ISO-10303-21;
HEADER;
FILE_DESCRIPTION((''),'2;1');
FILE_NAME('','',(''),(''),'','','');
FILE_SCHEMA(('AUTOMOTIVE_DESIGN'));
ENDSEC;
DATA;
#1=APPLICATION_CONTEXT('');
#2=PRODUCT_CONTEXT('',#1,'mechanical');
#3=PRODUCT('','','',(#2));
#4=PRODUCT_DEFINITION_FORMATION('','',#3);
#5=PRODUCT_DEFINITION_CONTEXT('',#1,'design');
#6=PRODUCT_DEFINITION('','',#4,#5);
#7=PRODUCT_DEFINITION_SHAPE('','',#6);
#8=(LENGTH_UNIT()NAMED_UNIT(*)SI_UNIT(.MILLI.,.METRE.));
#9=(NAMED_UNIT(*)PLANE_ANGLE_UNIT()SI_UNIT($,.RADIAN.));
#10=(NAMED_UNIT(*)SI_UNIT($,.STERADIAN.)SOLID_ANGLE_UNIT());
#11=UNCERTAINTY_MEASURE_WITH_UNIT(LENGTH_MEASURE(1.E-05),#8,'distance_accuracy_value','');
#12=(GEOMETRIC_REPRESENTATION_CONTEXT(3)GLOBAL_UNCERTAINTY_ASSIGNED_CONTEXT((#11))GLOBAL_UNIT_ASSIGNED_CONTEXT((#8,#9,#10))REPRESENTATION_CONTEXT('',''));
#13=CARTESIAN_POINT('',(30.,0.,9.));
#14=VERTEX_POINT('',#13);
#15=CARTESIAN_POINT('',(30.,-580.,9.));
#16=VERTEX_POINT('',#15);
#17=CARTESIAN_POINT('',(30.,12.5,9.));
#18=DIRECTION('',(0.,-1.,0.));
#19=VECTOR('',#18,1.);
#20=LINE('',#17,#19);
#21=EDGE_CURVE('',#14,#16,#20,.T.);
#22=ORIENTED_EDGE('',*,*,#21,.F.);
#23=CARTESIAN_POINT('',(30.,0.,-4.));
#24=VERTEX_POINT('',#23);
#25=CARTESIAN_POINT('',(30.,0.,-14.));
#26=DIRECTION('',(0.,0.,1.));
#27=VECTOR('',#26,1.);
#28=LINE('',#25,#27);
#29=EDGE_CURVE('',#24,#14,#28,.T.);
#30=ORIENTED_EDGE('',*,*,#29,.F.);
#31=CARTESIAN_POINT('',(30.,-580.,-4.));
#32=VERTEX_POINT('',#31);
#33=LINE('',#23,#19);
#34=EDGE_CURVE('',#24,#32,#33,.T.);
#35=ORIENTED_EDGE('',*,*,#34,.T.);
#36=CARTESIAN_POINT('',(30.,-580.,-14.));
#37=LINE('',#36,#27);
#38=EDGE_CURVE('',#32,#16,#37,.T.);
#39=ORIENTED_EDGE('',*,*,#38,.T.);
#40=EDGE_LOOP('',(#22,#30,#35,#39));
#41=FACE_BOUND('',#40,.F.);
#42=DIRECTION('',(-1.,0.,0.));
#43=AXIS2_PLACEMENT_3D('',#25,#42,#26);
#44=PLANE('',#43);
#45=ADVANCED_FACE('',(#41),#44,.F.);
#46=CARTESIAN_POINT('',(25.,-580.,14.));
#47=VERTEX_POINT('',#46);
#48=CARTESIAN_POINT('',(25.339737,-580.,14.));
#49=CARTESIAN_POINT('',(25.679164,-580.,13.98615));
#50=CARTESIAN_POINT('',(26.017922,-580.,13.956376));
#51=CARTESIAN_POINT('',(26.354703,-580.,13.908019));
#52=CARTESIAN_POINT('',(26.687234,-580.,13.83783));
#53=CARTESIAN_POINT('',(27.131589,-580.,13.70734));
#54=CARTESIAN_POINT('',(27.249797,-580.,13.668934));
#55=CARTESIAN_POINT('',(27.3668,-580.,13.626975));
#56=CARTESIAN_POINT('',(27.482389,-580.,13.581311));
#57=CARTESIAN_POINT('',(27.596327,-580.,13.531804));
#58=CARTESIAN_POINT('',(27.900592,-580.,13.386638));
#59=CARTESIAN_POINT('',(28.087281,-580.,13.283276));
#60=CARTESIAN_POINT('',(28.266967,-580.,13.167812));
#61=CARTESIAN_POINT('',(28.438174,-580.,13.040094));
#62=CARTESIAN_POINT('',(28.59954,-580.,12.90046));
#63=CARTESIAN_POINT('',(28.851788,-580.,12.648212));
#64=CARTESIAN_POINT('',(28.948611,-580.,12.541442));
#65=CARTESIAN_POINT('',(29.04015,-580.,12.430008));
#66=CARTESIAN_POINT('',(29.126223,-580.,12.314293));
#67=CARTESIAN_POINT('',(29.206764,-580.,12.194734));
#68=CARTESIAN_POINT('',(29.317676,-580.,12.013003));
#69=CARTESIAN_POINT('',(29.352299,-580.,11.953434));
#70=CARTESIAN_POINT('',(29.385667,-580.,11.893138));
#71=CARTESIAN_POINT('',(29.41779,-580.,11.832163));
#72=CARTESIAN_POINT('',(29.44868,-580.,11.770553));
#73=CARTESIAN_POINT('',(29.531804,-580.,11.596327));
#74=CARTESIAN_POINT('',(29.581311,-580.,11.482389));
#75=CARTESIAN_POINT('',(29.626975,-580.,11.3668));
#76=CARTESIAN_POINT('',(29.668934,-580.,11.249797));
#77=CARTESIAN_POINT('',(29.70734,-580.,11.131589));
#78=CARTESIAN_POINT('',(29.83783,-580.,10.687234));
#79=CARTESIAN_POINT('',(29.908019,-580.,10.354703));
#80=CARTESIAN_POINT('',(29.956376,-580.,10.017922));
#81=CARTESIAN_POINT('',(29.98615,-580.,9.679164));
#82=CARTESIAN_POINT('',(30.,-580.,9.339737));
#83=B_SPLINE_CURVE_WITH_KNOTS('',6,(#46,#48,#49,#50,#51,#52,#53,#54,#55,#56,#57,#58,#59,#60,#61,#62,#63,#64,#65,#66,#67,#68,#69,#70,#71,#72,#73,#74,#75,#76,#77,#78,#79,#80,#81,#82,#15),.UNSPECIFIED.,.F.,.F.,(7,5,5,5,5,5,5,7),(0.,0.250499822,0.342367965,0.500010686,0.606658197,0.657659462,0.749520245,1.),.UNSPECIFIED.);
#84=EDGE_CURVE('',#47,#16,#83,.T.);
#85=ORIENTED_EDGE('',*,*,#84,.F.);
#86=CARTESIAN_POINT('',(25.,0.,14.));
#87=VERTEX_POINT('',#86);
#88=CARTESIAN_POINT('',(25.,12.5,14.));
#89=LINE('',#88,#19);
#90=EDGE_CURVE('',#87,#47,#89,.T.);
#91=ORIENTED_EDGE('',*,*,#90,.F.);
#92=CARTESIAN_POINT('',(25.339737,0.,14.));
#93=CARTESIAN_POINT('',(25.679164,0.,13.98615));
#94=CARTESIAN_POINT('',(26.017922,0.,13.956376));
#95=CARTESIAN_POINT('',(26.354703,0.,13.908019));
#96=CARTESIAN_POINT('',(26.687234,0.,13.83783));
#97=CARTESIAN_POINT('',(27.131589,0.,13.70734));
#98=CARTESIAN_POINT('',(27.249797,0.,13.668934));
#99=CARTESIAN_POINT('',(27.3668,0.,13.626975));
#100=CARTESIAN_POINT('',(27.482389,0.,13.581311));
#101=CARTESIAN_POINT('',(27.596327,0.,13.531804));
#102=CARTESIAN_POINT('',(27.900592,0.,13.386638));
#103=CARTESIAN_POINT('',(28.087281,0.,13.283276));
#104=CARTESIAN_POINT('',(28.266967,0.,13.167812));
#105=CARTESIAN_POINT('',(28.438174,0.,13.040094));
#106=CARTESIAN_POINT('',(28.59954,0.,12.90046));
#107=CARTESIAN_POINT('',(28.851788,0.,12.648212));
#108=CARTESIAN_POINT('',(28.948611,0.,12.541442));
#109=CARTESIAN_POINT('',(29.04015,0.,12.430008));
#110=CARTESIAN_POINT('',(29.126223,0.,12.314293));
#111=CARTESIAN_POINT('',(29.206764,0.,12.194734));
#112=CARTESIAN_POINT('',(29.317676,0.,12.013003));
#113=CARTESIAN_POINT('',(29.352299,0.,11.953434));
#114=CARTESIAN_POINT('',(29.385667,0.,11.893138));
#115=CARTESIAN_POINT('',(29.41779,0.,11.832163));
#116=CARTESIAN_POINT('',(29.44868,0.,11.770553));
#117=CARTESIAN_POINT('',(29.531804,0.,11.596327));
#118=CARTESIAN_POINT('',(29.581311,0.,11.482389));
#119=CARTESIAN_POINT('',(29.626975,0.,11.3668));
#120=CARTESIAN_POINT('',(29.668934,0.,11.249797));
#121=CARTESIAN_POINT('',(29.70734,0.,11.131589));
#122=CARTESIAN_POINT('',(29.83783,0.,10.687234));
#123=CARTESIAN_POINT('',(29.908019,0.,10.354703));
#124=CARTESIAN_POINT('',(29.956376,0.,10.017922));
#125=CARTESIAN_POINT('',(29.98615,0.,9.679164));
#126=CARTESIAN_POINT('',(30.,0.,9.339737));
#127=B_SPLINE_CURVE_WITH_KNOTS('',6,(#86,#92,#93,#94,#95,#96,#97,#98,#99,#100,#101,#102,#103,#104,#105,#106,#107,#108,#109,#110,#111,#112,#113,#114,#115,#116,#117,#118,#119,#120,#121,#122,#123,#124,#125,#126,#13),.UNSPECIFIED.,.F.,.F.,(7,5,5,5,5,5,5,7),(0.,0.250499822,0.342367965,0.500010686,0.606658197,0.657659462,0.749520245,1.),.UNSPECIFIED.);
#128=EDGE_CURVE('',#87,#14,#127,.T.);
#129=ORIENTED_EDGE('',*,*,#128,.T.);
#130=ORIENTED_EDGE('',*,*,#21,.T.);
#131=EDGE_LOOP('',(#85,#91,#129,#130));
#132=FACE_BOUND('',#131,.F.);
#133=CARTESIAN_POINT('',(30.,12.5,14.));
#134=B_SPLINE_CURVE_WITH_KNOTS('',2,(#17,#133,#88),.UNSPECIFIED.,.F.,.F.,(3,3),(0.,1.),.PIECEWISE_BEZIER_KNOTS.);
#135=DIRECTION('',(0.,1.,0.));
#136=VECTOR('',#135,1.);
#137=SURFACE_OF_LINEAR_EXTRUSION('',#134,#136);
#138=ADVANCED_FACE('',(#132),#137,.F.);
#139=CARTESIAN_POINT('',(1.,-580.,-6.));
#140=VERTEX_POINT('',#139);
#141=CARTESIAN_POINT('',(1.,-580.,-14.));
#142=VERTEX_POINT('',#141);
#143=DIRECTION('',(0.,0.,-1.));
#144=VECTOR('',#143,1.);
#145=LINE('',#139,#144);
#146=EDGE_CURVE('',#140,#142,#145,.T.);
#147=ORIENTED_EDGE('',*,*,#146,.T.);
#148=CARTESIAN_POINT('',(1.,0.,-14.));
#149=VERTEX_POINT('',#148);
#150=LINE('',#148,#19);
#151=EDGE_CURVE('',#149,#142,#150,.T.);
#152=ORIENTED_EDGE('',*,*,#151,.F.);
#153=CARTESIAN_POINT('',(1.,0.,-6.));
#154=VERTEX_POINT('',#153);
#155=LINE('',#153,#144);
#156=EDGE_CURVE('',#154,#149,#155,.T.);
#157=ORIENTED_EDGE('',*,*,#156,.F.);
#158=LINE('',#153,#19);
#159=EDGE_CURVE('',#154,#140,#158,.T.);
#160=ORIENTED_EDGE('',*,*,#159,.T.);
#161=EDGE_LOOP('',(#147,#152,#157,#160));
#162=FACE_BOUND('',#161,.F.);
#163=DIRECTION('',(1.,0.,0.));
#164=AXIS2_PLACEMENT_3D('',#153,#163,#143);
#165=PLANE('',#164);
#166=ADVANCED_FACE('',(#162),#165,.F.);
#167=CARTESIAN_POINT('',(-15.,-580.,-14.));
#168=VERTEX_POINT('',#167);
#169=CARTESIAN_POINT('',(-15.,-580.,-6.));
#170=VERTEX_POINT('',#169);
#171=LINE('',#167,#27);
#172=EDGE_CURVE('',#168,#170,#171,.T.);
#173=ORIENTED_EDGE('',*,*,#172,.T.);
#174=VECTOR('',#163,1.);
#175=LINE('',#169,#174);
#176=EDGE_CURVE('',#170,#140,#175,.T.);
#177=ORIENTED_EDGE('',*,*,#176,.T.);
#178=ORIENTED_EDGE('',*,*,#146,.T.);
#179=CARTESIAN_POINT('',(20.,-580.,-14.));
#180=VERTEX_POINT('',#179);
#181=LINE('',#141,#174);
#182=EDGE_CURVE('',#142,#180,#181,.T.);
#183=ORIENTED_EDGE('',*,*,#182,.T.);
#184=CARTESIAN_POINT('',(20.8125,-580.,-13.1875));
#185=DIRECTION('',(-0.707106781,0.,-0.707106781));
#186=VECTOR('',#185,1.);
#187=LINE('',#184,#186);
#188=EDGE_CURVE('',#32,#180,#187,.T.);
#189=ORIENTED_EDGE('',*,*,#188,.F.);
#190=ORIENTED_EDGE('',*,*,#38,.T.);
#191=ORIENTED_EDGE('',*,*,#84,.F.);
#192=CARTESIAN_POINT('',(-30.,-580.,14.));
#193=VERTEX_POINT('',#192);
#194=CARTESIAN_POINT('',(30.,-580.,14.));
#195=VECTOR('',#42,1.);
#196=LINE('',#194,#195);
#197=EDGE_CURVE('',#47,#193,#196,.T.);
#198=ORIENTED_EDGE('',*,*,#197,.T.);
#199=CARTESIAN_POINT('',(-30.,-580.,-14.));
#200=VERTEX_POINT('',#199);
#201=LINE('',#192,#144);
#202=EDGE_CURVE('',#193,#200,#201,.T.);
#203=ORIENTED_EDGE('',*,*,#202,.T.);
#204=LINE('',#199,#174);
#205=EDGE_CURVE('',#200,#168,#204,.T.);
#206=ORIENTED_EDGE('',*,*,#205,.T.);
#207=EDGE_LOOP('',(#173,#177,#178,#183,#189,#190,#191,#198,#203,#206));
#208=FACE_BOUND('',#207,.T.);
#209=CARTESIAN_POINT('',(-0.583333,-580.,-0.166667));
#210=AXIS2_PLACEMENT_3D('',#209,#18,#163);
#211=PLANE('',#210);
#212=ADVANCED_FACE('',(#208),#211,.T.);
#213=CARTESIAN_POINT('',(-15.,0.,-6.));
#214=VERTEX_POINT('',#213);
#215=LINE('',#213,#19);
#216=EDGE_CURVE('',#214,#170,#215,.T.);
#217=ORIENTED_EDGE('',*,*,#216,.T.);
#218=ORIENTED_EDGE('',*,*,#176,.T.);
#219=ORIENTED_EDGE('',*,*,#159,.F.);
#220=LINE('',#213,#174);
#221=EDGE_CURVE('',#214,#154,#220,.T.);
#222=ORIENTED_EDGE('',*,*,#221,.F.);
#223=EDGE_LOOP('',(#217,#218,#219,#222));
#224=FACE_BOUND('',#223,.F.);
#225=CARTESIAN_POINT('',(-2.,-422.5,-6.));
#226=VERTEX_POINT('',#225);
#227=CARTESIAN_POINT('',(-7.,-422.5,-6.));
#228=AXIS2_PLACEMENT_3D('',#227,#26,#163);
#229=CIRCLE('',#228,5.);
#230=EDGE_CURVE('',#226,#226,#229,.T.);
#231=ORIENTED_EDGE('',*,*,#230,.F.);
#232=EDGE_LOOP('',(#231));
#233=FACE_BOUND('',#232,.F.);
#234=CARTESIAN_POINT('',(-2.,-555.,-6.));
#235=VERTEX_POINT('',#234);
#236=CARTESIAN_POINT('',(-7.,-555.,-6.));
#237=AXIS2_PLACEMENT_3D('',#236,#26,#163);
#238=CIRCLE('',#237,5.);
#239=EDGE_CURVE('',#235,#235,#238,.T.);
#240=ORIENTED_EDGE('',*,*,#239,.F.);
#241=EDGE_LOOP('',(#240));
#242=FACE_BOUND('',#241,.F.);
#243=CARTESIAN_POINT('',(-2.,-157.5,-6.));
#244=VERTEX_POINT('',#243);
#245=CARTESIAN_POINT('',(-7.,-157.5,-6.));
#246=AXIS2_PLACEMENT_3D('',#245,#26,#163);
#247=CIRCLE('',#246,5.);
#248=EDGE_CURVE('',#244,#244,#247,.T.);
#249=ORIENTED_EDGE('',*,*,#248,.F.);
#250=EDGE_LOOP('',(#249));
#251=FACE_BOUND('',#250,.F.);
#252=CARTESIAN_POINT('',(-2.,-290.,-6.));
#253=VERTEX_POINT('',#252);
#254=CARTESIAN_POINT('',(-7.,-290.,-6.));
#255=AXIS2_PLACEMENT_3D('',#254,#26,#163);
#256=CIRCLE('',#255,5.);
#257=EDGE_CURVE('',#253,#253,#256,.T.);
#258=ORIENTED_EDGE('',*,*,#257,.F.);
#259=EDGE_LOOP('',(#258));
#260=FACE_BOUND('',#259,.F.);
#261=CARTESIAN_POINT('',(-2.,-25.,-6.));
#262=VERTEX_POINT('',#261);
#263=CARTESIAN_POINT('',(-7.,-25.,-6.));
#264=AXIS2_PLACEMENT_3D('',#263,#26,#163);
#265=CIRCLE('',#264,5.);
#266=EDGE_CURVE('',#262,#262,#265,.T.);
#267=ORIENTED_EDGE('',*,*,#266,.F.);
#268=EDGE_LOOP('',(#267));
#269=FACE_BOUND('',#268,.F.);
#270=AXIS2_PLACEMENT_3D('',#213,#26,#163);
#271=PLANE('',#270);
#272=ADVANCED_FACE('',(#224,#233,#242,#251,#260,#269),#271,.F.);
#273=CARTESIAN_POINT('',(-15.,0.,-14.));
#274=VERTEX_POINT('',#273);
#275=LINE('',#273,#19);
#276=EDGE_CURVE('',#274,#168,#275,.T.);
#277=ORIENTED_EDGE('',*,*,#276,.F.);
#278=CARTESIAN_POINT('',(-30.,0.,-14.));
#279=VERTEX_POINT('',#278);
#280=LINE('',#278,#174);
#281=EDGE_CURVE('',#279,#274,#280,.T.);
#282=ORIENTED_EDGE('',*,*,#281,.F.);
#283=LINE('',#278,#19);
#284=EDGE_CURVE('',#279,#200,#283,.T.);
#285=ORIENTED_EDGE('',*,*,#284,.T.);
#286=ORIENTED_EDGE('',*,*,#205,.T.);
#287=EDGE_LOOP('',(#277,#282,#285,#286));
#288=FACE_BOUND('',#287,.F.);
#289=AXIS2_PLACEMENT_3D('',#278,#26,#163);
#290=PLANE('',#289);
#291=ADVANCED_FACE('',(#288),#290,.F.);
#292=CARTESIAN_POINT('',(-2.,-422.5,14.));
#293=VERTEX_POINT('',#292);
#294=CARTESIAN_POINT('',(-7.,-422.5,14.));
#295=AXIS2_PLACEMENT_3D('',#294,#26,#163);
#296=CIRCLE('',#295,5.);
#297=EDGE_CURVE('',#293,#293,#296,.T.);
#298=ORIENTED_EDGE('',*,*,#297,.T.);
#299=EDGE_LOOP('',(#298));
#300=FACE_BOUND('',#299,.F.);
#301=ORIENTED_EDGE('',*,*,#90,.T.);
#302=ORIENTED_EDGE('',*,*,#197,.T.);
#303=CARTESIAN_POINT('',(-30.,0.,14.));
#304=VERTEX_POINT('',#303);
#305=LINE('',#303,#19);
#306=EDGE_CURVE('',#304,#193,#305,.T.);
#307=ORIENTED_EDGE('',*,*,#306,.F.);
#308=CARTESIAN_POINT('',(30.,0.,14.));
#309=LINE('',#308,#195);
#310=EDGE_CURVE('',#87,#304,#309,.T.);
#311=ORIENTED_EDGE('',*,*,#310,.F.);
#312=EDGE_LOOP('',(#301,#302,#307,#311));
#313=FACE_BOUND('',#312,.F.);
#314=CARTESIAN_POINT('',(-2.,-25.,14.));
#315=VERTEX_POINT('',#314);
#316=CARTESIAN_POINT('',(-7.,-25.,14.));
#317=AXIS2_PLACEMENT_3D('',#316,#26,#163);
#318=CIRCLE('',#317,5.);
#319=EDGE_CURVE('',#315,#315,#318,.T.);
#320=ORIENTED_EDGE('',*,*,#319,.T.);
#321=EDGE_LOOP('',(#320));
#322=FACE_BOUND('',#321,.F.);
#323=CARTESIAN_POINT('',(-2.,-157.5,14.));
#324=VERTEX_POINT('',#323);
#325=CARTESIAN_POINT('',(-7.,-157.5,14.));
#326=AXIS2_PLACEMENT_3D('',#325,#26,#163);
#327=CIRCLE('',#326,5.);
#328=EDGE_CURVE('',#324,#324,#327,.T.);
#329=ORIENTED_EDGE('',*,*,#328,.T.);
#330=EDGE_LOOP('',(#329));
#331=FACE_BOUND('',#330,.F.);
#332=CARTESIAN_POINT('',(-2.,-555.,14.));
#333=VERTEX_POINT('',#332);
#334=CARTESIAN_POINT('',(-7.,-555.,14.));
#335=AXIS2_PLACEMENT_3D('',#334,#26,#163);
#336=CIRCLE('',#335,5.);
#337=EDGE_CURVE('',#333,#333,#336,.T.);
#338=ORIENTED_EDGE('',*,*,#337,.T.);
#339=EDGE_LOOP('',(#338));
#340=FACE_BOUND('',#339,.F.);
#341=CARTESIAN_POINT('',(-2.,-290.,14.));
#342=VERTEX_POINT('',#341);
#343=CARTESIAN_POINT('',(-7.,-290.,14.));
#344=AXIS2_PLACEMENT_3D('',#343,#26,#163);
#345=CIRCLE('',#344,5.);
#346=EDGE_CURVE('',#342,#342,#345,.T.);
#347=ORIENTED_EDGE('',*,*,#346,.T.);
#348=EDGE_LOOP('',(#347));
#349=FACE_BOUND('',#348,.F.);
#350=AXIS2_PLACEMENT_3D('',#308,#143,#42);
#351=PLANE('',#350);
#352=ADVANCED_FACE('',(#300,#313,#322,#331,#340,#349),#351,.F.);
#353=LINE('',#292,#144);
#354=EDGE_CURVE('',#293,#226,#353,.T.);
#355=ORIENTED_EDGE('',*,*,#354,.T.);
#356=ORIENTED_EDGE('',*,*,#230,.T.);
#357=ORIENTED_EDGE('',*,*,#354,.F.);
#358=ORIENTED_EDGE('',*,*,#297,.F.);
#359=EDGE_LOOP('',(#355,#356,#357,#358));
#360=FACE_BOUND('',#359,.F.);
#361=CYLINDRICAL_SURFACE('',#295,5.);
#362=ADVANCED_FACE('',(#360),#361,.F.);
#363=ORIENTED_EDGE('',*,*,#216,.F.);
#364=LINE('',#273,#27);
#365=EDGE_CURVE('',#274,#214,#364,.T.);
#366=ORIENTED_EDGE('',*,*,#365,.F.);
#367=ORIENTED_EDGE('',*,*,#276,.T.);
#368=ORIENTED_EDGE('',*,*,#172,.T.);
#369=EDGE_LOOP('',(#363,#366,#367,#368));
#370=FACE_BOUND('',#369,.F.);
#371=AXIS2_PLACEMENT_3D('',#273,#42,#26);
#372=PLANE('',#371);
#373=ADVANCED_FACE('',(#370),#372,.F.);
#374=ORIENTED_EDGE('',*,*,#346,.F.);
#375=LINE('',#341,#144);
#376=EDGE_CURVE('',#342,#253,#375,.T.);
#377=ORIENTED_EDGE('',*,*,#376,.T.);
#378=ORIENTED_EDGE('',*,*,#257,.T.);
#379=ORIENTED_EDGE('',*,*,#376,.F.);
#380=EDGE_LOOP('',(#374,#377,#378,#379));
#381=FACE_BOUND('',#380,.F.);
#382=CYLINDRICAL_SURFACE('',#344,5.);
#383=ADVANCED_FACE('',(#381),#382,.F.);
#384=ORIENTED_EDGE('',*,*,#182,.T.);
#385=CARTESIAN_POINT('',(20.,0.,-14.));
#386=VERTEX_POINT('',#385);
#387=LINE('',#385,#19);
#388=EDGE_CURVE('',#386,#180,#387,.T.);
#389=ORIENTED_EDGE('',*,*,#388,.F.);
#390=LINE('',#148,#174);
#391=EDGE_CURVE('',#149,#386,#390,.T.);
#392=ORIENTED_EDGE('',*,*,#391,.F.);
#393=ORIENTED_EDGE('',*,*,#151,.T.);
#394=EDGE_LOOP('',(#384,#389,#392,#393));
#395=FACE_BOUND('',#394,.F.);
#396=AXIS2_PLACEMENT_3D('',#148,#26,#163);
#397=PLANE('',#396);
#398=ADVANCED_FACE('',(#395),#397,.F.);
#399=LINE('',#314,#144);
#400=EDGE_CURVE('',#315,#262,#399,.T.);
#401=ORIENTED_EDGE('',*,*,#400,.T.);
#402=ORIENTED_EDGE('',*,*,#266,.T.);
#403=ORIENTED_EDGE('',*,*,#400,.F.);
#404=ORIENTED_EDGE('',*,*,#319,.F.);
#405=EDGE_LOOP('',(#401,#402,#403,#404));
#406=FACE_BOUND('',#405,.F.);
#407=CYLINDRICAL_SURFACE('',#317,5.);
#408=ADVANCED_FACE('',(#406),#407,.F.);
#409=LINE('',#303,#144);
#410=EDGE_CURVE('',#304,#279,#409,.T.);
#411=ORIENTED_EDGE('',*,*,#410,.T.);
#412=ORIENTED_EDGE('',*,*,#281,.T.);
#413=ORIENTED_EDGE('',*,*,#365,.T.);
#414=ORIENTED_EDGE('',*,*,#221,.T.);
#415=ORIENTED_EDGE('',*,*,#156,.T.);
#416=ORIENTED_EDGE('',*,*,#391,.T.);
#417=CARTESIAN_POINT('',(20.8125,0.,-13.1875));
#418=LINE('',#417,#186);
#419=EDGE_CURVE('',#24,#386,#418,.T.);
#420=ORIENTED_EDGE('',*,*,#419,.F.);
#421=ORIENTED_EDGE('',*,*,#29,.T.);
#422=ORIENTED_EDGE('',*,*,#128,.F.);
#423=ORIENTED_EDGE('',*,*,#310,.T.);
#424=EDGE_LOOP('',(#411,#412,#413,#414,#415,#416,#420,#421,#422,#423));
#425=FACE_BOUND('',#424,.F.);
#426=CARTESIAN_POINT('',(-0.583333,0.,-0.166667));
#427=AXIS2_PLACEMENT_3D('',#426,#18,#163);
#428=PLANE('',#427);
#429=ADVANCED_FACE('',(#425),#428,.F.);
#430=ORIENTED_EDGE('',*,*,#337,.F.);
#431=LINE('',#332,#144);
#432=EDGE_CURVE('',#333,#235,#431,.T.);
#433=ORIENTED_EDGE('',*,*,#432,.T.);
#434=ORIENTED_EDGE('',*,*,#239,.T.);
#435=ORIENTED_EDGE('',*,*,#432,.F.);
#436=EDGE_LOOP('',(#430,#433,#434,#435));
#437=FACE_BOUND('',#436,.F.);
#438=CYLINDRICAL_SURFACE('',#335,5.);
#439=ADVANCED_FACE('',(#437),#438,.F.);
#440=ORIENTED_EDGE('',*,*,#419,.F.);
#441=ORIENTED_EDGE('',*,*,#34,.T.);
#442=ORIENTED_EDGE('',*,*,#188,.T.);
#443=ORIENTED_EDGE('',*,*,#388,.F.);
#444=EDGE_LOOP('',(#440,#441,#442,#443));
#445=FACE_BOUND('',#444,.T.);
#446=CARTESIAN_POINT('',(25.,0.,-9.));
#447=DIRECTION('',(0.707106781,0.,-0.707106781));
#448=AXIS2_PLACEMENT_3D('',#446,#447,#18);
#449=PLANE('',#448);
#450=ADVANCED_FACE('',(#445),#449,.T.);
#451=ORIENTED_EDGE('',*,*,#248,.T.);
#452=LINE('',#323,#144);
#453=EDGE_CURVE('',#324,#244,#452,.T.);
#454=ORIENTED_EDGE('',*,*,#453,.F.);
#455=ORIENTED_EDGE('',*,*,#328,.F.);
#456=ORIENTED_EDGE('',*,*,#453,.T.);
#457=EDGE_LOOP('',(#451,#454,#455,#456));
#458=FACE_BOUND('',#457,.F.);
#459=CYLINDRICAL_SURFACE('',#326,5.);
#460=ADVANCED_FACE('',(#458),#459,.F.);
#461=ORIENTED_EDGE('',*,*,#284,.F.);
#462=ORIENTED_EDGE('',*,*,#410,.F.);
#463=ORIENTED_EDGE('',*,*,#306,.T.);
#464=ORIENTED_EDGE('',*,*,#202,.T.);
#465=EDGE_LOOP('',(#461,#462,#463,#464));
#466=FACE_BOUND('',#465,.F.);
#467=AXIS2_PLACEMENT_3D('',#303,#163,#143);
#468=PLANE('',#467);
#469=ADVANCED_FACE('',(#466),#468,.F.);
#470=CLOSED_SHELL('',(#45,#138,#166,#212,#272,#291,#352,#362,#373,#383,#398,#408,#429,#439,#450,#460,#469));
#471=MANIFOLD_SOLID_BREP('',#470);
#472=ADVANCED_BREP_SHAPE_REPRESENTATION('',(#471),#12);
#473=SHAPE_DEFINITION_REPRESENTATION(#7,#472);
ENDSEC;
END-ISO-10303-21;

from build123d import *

# Parameters (mm, degrees)
F1_DEPTH    = 580
F2_SIZE2    = 10
F2_SIZE     = 10
F3_T1_DEPTH = 605
F4_R        = 5
F5_DEPTH    = 28.0010001


# Not quite as in the source:
# - a fillet or chamfer that OpenCascade refuses, or shapes differently, is made with other operations: its cross-section is extruded or revolved along the edge and cut away or added


with BuildPart() as f1:
    # F0 (on Front) → F1 (new body)
    with BuildSketch(Plane.XZ):
        Polygon((30, -14), (30, 14), (-30, 14), (-30, -14), (-15, -14), (-15, -6), (1, -6), (1, -14), align=None)
    extrude(amount=F1_DEPTH)

    # F2
    f2_edges = [f1.edges().sort_by_distance(p)[0] for p in [
        (30, -290, -14),
    ]]
    chamfer(f2_edges, length=F2_SIZE, length2=F2_SIZE2)

    # F3: fillet of radius 5 on 1 edges, made by hand

    # F3_s2 → F3_t1 (cut)
    with BuildSketch(Plane.XZ.offset(-12.5)):
        with BuildLine():
            add(Edge.make_bspline(
                [(30, 9), (30, 14), (25, 14)],
                knots=[0, 0, 0, 1, 1, 1], degree=2, weights=[1, 1, 1]))
            Line((25, 14), (30, 14))
            Line((30, 14), (30, 9))
        make_face()
    extrude(amount=F3_T1_DEPTH, mode=Mode.SUBTRACT)

    # F4 (on face) → F5 (cut, through all)
    with BuildSketch(Plane.XY.offset(14)):
        with Locations((-7, -25)):
            Circle(F4_R)
        with Locations((-7, -290)):
            Circle(F4_R)
        with Locations((-7, -157.5)):
            Circle(F4_R)
        with Locations((-7, -422.5)):
            Circle(F4_R)
        with Locations((-7, -555)):
            Circle(F4_R)
    extrude(amount=-F5_DEPTH, mode=Mode.SUBTRACT)


solid = f1.part
